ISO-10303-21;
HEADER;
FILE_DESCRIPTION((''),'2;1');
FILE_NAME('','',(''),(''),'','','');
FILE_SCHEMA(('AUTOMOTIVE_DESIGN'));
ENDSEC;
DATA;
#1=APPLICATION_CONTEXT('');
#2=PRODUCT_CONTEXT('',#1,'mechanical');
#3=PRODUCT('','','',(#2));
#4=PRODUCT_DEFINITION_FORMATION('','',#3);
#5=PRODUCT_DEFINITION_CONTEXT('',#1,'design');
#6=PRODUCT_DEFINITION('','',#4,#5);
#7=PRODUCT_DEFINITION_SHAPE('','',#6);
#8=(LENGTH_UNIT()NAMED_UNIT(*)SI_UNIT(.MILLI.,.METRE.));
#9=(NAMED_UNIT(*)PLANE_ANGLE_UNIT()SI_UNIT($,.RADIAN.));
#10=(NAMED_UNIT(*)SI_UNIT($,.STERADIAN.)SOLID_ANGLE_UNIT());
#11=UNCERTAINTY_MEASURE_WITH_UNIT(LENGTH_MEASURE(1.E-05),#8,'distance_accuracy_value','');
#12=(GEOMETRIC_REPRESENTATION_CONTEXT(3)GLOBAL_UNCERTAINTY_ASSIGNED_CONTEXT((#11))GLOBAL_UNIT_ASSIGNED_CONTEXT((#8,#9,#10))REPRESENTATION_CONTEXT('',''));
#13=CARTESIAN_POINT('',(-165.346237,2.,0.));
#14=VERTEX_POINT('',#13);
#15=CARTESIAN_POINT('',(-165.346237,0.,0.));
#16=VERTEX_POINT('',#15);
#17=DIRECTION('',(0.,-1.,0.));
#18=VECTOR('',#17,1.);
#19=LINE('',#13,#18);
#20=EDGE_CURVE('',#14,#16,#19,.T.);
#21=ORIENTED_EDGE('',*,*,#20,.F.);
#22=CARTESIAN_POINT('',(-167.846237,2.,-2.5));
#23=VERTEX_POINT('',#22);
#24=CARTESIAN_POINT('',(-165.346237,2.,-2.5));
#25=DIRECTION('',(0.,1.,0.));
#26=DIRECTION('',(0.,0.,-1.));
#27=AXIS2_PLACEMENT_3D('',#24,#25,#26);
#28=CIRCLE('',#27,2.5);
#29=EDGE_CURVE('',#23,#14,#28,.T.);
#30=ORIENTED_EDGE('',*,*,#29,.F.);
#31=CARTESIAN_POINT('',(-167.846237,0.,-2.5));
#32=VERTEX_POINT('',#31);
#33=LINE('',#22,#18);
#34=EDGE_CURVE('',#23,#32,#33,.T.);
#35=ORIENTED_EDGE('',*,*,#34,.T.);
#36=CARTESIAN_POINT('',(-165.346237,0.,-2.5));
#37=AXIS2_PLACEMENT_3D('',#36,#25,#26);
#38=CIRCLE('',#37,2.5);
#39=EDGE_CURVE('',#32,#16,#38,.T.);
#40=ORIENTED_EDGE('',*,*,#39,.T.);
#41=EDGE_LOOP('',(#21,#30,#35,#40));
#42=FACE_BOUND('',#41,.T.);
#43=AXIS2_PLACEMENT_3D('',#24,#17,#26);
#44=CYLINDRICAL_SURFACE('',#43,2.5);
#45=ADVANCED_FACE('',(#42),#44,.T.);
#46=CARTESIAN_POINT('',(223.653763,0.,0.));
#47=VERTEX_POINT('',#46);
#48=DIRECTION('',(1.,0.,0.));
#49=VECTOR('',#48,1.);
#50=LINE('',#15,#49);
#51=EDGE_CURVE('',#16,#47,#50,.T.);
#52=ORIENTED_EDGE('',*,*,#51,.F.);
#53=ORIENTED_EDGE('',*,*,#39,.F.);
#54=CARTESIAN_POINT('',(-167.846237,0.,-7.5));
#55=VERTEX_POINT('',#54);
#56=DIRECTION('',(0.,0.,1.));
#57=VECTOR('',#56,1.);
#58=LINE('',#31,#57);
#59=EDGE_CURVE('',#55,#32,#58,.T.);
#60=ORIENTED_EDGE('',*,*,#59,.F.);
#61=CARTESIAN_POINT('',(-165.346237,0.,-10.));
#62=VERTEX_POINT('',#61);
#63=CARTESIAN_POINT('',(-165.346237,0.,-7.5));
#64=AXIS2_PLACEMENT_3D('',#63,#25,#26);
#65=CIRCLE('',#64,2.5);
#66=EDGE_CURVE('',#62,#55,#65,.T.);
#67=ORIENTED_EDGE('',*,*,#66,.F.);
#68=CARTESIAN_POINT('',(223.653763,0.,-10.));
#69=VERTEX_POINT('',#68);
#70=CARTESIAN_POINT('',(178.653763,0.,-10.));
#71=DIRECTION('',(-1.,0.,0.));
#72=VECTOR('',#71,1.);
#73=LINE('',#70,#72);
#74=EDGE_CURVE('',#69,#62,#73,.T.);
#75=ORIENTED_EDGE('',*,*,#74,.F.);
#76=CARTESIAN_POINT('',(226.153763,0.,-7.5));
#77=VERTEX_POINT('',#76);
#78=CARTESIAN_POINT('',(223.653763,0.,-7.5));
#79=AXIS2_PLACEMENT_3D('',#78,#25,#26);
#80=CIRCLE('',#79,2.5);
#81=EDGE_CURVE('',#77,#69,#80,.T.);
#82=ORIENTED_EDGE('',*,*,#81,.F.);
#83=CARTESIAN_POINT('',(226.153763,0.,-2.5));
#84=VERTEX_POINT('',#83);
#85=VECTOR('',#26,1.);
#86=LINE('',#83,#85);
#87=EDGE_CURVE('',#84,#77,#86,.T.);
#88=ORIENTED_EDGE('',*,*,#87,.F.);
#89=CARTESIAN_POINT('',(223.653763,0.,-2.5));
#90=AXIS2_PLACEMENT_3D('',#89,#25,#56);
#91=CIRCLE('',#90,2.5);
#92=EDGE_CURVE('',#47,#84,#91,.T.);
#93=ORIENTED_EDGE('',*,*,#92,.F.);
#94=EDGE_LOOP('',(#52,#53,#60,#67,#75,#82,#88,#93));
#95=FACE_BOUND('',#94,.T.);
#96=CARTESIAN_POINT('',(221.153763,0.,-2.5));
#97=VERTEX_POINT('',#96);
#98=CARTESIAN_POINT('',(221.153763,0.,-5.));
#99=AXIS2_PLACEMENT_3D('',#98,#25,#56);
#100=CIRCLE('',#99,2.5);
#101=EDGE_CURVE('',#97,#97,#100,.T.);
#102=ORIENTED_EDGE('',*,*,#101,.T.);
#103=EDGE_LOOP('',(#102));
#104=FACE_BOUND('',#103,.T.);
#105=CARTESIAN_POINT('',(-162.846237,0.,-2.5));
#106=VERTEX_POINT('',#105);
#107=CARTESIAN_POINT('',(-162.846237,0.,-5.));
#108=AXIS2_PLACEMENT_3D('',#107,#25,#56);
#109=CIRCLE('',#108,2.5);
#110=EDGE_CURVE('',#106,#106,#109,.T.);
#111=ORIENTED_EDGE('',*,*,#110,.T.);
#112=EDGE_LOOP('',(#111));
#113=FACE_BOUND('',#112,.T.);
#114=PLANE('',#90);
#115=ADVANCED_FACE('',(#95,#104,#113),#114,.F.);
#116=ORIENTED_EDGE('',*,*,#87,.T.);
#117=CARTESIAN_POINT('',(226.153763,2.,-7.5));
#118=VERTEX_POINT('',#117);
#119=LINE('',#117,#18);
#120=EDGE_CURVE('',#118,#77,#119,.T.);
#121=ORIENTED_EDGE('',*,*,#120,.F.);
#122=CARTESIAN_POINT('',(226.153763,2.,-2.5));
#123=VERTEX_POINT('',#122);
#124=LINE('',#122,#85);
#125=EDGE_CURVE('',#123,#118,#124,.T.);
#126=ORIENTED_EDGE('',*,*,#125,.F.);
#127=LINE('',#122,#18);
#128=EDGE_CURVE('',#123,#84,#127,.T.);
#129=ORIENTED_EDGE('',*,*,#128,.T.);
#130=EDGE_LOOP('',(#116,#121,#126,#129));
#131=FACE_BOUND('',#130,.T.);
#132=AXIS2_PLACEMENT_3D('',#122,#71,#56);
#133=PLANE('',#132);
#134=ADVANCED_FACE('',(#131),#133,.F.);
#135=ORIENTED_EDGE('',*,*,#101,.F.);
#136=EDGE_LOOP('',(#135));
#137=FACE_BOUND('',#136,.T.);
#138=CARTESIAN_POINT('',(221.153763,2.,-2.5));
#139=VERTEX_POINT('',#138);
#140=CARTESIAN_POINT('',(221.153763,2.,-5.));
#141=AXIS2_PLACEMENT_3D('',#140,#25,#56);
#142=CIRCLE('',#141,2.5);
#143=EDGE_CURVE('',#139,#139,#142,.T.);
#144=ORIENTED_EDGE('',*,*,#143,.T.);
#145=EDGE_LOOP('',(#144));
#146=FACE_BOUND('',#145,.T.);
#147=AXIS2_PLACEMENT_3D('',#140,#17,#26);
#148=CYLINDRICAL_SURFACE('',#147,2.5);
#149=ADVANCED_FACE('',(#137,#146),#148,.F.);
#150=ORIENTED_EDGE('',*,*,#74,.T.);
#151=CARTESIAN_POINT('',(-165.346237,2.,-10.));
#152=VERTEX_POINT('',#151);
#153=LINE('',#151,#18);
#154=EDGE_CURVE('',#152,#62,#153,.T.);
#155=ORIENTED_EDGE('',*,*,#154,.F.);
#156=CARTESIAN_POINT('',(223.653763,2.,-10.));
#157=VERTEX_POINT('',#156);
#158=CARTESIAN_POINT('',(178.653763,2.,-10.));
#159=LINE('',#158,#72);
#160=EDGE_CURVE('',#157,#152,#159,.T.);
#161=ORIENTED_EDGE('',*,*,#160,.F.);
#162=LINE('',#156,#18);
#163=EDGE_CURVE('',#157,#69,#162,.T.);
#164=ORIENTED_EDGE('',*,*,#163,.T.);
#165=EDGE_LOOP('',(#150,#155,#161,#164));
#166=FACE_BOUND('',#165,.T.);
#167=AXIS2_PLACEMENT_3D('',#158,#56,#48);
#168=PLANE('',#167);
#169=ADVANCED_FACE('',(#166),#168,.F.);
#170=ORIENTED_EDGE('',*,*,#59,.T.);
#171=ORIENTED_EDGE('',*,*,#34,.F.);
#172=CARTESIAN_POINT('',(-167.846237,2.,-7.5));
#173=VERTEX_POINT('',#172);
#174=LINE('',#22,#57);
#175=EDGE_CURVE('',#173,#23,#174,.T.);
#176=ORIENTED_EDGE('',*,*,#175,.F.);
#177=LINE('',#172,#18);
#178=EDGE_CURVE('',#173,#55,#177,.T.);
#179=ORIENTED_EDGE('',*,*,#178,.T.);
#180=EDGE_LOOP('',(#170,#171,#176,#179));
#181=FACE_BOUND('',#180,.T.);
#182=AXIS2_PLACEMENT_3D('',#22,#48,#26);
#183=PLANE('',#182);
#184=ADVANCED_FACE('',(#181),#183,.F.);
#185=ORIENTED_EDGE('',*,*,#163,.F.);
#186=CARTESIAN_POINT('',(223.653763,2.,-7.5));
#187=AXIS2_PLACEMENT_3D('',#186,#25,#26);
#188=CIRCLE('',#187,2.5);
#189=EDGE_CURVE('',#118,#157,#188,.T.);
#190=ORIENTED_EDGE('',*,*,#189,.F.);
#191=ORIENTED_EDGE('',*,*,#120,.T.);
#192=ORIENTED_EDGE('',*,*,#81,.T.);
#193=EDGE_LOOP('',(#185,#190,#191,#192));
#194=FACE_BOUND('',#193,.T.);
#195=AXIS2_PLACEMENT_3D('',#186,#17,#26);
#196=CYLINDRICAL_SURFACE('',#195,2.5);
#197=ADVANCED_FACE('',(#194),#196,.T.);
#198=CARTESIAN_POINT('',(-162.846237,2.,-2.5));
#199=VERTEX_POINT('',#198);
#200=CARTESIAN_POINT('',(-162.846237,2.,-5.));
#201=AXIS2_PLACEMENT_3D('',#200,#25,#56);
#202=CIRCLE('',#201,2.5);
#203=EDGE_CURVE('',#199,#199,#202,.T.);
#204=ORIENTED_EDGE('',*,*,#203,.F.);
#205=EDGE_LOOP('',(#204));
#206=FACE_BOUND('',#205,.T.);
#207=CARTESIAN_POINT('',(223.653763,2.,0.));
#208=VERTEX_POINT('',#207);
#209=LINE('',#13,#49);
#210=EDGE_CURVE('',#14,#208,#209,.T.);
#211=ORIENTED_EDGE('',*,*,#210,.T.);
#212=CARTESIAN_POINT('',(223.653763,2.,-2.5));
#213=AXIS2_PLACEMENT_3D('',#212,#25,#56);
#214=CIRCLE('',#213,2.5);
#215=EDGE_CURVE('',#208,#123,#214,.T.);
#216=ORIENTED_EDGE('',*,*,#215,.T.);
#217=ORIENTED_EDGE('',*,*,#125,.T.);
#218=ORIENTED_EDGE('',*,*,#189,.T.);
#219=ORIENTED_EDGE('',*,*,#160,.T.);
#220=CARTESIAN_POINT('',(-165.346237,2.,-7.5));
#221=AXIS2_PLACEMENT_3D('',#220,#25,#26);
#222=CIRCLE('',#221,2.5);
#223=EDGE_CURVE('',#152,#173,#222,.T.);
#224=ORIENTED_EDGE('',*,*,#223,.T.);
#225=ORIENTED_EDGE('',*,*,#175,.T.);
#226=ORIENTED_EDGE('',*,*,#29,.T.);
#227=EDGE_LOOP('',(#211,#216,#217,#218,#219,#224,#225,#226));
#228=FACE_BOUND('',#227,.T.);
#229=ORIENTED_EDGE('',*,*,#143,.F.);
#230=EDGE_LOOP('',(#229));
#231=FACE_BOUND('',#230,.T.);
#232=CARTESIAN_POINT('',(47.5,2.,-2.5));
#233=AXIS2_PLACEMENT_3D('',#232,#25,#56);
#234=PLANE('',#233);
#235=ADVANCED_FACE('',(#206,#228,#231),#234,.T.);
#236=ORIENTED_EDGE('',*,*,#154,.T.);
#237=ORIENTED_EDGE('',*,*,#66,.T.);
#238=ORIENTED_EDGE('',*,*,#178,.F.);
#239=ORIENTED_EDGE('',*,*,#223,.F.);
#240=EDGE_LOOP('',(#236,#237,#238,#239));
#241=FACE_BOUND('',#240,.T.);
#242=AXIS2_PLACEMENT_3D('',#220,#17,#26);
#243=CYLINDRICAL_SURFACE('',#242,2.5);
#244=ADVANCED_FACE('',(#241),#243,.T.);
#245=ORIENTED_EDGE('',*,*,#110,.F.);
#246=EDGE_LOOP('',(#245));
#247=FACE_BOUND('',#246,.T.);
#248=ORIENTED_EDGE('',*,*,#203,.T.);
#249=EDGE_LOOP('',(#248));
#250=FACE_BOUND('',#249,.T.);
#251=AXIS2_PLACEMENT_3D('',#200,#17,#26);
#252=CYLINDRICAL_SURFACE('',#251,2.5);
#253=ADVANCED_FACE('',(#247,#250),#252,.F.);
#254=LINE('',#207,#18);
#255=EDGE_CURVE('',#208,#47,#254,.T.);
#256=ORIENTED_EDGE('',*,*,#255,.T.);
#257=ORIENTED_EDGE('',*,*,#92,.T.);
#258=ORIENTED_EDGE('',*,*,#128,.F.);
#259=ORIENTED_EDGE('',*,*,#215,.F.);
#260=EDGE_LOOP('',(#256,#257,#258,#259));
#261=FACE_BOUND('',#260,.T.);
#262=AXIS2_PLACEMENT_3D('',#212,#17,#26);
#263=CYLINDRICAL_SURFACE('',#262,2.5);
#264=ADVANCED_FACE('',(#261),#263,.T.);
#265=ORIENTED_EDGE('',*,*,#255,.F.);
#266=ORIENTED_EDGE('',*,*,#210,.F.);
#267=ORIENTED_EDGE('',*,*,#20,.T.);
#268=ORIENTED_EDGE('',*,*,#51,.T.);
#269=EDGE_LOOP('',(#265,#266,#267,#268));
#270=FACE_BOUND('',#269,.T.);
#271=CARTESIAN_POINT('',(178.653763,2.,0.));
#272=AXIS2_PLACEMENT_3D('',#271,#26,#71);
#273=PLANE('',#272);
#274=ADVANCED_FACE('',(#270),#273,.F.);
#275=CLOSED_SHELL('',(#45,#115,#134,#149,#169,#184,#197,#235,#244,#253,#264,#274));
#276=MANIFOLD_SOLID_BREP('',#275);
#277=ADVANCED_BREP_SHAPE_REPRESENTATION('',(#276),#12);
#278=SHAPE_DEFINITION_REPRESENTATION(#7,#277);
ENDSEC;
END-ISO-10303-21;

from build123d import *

# Parameters (mm, degrees)
SKETCH1_R           = 2.5
BOSS_EXTRUDE2_DEPTH = 2
FLEX1_OUTLINE_R     = 2.5
FLEX1_DEPTH         = 2


# Read off the part's stored shape, not the designer's step: Flex1
with BuildPart() as part:
    # Sketch1 → Boss-Extrude2 (new body)
    with BuildSketch(Plane(origin=(0, 0, 0), x_dir=(1, 0, 0), z_dir=(0, 1, 0))):
        with BuildLine():
            Line((2.5, 0), (47.5, 0))
            ThreePointArc((47.5, 0), (49.267766953, 0.732233047), (50, 2.5))
            Line((50, 2.5), (50, 7.5))
            ThreePointArc((50, 7.5), (49.267766953, 9.267766953), (47.5, 10))
            Line((47.5, 10), (2.5, 10))
            ThreePointArc((2.5, 10), (0.732233047, 9.267766953), (0, 7.5))
            Line((0, 7.5), (0, 2.5))
            ThreePointArc((0, 2.5), (0.732233047, 0.732233047), (2.5, 0))
        make_face()
        with Locations(Location((5, 5, 0), (0, 0, 270))):
            Circle(SKETCH1_R, mode=Mode.SUBTRACT)
        with Locations(Location((45, 5, 0), (0, 0, 270))):
            Circle(SKETCH1_R, mode=Mode.SUBTRACT)
    extrude(amount=BOSS_EXTRUDE2_DEPTH)

    # Flex1 outline → Flex1 (add)
    # profile 1 of 4: a face of its own
    with BuildSketch(Plane(origin=(0, 0, 0), x_dir=(1, 0, 0), z_dir=(0, 1, 0))):
        with BuildLine():
            Line((2.5, 10), (-165.346236693, 10))
            ThreePointArc((-165.346236693, 10), (-167.114003646, 9.267766953), (-167.846236693, 7.5))
            Line((-167.846236693, 7.5), (-167.846236693, 2.5))
            ThreePointArc((-167.846236693, 2.5), (-167.114003646, 0.732233047), (-165.346236693, 0))
            Line((-165.346236693, 0), (2.5, 0))
            ThreePointArc((2.5, 0), (0.732233047, 0.732233047), (0, 2.5))
            Line((0, 2.5), (0, 7.5))
            ThreePointArc((0, 7.5), (0.732233047, 9.267766953), (2.5, 10))
        make_face()
        with Locations((-162.846236693, 5)):
            Circle(FLEX1_OUTLINE_R, mode=Mode.SUBTRACT)
    # profile 2 of 4: a face of its own
    with BuildSketch(Plane(origin=(0, 0, 0), x_dir=(1, 0, 0), z_dir=(0, 1, 0))):
        with BuildLine():
            Line((223.653763307, 10), (47.5, 10))
            ThreePointArc((47.5, 10), (49.267766953, 9.267766953), (50, 7.5))
            Line((50, 7.5), (50, 2.5))
            ThreePointArc((50, 2.5), (49.267766953, 0.732233047), (47.5, 0))
            Line((47.5, 0), (223.653763307, 0))
            ThreePointArc((223.653763307, 0), (225.42153026, 0.732233047), (226.153763307, 2.5))
            Line((226.153763307, 2.5), (226.153763307, 7.5))
            ThreePointArc((226.153763307, 7.5), (225.42153026, 9.267766953), (223.653763307, 10))
        make_face()
        with Locations((221.153763307, 5)):
            Circle(FLEX1_OUTLINE_R, mode=Mode.SUBTRACT)
    # profile 3 of 4: a face of its own
    with BuildSketch(Plane(origin=(0, 0, 0), x_dir=(1, 0, 0), z_dir=(0, 1, 0))):
        with Locations((5, 5)):
            Circle(FLEX1_OUTLINE_R)
    # profile 4 of 4: a face of its own
    with BuildSketch(Plane(origin=(0, 0, 0), x_dir=(1, 0, 0), z_dir=(0, 1, 0))):
        with Locations((45, 5)):
            Circle(FLEX1_OUTLINE_R)
    extrude(amount=FLEX1_DEPTH)


solid = part.part
